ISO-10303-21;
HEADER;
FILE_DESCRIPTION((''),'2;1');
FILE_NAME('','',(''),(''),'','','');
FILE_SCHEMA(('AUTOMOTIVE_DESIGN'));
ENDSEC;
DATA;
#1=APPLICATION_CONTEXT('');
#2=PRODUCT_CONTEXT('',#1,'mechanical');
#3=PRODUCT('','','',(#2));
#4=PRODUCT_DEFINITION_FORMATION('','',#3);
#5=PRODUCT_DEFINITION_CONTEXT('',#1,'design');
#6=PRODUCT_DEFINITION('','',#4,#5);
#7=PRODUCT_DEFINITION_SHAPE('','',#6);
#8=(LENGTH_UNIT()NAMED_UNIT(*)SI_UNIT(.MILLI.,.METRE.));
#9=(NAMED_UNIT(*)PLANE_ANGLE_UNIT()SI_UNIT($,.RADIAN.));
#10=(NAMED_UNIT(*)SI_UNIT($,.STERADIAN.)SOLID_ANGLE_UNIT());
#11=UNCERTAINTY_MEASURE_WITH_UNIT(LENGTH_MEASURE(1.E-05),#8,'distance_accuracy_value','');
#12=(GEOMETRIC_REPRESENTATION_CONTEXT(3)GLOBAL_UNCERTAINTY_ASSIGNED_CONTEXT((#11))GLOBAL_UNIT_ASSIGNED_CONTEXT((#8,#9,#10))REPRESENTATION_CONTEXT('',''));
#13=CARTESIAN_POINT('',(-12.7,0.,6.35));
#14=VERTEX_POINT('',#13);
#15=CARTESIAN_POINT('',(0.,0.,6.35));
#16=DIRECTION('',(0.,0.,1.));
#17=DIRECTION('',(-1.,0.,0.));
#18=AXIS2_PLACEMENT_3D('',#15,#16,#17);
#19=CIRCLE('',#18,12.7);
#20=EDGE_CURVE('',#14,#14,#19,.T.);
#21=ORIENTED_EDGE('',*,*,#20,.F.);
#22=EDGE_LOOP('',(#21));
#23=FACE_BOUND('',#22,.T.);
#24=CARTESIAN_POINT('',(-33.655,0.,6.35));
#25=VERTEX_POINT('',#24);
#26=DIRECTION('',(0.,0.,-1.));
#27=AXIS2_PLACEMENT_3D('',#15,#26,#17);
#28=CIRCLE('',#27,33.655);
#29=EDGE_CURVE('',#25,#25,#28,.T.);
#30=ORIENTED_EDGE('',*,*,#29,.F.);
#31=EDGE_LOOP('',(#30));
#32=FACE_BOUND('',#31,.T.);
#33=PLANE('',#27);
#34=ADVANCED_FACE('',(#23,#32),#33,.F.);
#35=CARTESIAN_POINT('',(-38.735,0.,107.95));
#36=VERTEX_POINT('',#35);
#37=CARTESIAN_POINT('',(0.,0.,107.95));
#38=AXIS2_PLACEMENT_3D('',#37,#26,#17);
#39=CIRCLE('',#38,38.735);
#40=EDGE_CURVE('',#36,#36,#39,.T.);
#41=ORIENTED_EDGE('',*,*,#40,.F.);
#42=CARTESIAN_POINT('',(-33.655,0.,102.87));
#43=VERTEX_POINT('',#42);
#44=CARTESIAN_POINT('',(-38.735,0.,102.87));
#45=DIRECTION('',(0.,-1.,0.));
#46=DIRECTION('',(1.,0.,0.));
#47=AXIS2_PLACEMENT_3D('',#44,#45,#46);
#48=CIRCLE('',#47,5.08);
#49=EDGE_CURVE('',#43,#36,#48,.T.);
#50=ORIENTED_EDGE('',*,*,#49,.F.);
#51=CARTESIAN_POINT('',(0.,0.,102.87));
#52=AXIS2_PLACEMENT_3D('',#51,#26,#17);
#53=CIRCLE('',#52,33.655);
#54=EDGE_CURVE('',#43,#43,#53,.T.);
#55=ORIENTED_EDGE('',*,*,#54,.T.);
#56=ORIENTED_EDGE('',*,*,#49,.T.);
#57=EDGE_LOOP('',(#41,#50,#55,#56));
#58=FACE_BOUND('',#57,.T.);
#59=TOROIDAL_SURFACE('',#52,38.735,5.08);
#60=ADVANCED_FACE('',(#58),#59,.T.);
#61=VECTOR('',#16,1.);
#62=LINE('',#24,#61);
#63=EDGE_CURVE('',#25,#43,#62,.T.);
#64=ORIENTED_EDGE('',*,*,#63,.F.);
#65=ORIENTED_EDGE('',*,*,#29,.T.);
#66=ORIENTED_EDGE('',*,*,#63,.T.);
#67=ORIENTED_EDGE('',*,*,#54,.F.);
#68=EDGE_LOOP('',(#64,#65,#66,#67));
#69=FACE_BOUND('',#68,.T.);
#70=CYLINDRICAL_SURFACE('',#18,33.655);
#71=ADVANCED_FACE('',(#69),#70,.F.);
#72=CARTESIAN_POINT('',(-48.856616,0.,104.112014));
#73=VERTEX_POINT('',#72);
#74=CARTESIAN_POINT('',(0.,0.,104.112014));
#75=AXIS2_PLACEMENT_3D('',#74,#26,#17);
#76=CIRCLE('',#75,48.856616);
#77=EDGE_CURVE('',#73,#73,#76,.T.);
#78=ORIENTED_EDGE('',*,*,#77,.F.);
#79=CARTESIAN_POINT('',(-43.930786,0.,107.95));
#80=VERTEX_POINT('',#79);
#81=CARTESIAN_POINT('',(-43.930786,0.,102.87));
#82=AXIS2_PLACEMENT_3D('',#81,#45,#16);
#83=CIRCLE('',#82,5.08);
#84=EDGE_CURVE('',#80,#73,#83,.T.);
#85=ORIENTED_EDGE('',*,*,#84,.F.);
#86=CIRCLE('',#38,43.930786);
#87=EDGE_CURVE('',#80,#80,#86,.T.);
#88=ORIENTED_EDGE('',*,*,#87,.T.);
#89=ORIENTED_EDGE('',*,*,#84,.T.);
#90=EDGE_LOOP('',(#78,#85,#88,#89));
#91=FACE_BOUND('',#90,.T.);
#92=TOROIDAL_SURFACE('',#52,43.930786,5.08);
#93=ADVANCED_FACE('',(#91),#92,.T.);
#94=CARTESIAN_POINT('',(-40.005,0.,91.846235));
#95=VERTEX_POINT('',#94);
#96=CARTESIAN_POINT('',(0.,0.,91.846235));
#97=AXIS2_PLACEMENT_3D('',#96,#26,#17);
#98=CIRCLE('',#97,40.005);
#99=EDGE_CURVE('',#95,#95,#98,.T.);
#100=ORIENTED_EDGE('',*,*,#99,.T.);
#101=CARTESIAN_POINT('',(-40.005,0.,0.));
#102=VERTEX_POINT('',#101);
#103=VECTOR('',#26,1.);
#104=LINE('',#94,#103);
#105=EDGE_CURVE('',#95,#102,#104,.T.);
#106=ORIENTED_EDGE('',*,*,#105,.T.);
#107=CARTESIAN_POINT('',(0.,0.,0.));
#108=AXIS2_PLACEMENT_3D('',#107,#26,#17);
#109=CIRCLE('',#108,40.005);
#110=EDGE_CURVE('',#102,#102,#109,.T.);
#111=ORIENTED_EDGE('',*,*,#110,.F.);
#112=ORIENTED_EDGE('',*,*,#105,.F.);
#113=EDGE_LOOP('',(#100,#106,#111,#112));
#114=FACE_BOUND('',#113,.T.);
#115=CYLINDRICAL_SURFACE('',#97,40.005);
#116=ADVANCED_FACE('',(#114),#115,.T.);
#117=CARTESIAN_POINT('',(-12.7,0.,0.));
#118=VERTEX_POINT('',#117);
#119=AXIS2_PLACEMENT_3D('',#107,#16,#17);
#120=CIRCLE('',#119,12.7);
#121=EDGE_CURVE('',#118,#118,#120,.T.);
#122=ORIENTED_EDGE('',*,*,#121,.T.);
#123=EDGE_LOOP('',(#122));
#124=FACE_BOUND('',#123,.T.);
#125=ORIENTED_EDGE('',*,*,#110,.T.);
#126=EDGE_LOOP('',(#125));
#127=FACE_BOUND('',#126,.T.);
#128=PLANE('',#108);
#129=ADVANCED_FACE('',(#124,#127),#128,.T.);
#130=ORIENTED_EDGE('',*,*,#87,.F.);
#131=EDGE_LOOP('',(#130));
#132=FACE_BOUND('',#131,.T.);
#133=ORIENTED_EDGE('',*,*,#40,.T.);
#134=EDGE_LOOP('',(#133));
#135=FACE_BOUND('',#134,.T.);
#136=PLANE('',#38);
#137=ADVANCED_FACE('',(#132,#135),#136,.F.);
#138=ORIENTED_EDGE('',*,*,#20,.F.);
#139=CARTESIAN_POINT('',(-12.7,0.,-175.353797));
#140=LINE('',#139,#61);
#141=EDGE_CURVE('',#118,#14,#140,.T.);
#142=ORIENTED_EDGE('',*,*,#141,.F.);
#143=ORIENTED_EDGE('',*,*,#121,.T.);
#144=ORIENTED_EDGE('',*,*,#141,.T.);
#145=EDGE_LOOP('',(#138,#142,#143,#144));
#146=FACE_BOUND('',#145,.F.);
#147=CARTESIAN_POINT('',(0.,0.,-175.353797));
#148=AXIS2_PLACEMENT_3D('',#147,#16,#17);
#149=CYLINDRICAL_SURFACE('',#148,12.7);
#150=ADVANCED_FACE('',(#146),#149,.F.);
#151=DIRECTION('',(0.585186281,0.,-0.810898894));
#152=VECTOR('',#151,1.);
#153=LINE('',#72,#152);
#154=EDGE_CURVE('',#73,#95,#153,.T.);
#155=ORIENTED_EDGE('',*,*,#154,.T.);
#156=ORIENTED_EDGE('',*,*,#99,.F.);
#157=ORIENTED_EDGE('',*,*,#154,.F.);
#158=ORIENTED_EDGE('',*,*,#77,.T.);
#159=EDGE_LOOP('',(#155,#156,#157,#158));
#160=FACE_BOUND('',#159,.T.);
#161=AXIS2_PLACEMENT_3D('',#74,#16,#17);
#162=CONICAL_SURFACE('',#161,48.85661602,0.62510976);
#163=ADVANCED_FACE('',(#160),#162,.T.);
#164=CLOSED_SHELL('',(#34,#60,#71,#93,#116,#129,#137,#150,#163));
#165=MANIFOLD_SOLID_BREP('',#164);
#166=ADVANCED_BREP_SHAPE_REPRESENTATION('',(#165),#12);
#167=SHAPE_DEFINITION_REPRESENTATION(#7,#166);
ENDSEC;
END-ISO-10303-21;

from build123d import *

# Parameters (mm, degrees)
F4_D = 25.4


# Not quite as in the source:
# - a fillet or chamfer that OpenCascade refuses, or shapes differently, is made with other operations: its cross-section is extruded or revolved along the edge and cut away or added


with BuildPart() as f1:
    # F0 (on Front) → F1 (revolve)
    with BuildSketch(Plane.XZ):
        Polygon((-33.655, 107.95), (-40.005, 107.95), (-48.8566160202, 107.95), (-48.8566160202, 104.1120141745), (-40.005, 91.8462350965), (-40.005, 0), (0, 0), (0, 6.35), (-33.655, 6.35), align=None)
    revolve(axis=Axis((0, 0, 3.175), (0, 0, -1)))

    # F2: fillet of radius 5.08 on 2 edges, made by hand

    # F2_s1 → F2_t2 (revolve, cut)
    with BuildSketch(Plane.XZ):
        with BuildLine():
            ThreePointArc((-33.655, 102.87), (-35.1428975516, 106.4621024484), (-38.735, 107.95))
            Line((-38.735, 107.95), (-33.655, 107.95))
            Line((-33.655, 107.95), (-33.655, 102.87))
        make_face()
    revolve(axis=Axis((0, 0, 107.95), (0, 0, -1)), mode=Mode.SUBTRACT)

    # F2_s3 → F2_t4 (revolve, cut)
    with BuildSketch(Plane.XZ):
        with BuildLine():
            ThreePointArc((-43.9307860606, 107.95), (-47.0530422956, 106.8772329609), (-48.8566160202, 104.1120141745))
            Line((-48.8566160202, 104.1120141745), (-48.8566160202, 107.95))
            Line((-48.8566160202, 107.95), (-43.9307860606, 107.95))
        make_face()
    revolve(axis=Axis((0, 0, 107.95), (0, 0, -1)), mode=Mode.SUBTRACT)

    # F4 (through all)
    with Locations(Plane(origin=(0, 0, 0), x_dir=(1, 0, 0), z_dir=(0, 0, -1))):
        with Locations((0, 0)):
            Hole(F4_D / 2)


solid = f1.part
